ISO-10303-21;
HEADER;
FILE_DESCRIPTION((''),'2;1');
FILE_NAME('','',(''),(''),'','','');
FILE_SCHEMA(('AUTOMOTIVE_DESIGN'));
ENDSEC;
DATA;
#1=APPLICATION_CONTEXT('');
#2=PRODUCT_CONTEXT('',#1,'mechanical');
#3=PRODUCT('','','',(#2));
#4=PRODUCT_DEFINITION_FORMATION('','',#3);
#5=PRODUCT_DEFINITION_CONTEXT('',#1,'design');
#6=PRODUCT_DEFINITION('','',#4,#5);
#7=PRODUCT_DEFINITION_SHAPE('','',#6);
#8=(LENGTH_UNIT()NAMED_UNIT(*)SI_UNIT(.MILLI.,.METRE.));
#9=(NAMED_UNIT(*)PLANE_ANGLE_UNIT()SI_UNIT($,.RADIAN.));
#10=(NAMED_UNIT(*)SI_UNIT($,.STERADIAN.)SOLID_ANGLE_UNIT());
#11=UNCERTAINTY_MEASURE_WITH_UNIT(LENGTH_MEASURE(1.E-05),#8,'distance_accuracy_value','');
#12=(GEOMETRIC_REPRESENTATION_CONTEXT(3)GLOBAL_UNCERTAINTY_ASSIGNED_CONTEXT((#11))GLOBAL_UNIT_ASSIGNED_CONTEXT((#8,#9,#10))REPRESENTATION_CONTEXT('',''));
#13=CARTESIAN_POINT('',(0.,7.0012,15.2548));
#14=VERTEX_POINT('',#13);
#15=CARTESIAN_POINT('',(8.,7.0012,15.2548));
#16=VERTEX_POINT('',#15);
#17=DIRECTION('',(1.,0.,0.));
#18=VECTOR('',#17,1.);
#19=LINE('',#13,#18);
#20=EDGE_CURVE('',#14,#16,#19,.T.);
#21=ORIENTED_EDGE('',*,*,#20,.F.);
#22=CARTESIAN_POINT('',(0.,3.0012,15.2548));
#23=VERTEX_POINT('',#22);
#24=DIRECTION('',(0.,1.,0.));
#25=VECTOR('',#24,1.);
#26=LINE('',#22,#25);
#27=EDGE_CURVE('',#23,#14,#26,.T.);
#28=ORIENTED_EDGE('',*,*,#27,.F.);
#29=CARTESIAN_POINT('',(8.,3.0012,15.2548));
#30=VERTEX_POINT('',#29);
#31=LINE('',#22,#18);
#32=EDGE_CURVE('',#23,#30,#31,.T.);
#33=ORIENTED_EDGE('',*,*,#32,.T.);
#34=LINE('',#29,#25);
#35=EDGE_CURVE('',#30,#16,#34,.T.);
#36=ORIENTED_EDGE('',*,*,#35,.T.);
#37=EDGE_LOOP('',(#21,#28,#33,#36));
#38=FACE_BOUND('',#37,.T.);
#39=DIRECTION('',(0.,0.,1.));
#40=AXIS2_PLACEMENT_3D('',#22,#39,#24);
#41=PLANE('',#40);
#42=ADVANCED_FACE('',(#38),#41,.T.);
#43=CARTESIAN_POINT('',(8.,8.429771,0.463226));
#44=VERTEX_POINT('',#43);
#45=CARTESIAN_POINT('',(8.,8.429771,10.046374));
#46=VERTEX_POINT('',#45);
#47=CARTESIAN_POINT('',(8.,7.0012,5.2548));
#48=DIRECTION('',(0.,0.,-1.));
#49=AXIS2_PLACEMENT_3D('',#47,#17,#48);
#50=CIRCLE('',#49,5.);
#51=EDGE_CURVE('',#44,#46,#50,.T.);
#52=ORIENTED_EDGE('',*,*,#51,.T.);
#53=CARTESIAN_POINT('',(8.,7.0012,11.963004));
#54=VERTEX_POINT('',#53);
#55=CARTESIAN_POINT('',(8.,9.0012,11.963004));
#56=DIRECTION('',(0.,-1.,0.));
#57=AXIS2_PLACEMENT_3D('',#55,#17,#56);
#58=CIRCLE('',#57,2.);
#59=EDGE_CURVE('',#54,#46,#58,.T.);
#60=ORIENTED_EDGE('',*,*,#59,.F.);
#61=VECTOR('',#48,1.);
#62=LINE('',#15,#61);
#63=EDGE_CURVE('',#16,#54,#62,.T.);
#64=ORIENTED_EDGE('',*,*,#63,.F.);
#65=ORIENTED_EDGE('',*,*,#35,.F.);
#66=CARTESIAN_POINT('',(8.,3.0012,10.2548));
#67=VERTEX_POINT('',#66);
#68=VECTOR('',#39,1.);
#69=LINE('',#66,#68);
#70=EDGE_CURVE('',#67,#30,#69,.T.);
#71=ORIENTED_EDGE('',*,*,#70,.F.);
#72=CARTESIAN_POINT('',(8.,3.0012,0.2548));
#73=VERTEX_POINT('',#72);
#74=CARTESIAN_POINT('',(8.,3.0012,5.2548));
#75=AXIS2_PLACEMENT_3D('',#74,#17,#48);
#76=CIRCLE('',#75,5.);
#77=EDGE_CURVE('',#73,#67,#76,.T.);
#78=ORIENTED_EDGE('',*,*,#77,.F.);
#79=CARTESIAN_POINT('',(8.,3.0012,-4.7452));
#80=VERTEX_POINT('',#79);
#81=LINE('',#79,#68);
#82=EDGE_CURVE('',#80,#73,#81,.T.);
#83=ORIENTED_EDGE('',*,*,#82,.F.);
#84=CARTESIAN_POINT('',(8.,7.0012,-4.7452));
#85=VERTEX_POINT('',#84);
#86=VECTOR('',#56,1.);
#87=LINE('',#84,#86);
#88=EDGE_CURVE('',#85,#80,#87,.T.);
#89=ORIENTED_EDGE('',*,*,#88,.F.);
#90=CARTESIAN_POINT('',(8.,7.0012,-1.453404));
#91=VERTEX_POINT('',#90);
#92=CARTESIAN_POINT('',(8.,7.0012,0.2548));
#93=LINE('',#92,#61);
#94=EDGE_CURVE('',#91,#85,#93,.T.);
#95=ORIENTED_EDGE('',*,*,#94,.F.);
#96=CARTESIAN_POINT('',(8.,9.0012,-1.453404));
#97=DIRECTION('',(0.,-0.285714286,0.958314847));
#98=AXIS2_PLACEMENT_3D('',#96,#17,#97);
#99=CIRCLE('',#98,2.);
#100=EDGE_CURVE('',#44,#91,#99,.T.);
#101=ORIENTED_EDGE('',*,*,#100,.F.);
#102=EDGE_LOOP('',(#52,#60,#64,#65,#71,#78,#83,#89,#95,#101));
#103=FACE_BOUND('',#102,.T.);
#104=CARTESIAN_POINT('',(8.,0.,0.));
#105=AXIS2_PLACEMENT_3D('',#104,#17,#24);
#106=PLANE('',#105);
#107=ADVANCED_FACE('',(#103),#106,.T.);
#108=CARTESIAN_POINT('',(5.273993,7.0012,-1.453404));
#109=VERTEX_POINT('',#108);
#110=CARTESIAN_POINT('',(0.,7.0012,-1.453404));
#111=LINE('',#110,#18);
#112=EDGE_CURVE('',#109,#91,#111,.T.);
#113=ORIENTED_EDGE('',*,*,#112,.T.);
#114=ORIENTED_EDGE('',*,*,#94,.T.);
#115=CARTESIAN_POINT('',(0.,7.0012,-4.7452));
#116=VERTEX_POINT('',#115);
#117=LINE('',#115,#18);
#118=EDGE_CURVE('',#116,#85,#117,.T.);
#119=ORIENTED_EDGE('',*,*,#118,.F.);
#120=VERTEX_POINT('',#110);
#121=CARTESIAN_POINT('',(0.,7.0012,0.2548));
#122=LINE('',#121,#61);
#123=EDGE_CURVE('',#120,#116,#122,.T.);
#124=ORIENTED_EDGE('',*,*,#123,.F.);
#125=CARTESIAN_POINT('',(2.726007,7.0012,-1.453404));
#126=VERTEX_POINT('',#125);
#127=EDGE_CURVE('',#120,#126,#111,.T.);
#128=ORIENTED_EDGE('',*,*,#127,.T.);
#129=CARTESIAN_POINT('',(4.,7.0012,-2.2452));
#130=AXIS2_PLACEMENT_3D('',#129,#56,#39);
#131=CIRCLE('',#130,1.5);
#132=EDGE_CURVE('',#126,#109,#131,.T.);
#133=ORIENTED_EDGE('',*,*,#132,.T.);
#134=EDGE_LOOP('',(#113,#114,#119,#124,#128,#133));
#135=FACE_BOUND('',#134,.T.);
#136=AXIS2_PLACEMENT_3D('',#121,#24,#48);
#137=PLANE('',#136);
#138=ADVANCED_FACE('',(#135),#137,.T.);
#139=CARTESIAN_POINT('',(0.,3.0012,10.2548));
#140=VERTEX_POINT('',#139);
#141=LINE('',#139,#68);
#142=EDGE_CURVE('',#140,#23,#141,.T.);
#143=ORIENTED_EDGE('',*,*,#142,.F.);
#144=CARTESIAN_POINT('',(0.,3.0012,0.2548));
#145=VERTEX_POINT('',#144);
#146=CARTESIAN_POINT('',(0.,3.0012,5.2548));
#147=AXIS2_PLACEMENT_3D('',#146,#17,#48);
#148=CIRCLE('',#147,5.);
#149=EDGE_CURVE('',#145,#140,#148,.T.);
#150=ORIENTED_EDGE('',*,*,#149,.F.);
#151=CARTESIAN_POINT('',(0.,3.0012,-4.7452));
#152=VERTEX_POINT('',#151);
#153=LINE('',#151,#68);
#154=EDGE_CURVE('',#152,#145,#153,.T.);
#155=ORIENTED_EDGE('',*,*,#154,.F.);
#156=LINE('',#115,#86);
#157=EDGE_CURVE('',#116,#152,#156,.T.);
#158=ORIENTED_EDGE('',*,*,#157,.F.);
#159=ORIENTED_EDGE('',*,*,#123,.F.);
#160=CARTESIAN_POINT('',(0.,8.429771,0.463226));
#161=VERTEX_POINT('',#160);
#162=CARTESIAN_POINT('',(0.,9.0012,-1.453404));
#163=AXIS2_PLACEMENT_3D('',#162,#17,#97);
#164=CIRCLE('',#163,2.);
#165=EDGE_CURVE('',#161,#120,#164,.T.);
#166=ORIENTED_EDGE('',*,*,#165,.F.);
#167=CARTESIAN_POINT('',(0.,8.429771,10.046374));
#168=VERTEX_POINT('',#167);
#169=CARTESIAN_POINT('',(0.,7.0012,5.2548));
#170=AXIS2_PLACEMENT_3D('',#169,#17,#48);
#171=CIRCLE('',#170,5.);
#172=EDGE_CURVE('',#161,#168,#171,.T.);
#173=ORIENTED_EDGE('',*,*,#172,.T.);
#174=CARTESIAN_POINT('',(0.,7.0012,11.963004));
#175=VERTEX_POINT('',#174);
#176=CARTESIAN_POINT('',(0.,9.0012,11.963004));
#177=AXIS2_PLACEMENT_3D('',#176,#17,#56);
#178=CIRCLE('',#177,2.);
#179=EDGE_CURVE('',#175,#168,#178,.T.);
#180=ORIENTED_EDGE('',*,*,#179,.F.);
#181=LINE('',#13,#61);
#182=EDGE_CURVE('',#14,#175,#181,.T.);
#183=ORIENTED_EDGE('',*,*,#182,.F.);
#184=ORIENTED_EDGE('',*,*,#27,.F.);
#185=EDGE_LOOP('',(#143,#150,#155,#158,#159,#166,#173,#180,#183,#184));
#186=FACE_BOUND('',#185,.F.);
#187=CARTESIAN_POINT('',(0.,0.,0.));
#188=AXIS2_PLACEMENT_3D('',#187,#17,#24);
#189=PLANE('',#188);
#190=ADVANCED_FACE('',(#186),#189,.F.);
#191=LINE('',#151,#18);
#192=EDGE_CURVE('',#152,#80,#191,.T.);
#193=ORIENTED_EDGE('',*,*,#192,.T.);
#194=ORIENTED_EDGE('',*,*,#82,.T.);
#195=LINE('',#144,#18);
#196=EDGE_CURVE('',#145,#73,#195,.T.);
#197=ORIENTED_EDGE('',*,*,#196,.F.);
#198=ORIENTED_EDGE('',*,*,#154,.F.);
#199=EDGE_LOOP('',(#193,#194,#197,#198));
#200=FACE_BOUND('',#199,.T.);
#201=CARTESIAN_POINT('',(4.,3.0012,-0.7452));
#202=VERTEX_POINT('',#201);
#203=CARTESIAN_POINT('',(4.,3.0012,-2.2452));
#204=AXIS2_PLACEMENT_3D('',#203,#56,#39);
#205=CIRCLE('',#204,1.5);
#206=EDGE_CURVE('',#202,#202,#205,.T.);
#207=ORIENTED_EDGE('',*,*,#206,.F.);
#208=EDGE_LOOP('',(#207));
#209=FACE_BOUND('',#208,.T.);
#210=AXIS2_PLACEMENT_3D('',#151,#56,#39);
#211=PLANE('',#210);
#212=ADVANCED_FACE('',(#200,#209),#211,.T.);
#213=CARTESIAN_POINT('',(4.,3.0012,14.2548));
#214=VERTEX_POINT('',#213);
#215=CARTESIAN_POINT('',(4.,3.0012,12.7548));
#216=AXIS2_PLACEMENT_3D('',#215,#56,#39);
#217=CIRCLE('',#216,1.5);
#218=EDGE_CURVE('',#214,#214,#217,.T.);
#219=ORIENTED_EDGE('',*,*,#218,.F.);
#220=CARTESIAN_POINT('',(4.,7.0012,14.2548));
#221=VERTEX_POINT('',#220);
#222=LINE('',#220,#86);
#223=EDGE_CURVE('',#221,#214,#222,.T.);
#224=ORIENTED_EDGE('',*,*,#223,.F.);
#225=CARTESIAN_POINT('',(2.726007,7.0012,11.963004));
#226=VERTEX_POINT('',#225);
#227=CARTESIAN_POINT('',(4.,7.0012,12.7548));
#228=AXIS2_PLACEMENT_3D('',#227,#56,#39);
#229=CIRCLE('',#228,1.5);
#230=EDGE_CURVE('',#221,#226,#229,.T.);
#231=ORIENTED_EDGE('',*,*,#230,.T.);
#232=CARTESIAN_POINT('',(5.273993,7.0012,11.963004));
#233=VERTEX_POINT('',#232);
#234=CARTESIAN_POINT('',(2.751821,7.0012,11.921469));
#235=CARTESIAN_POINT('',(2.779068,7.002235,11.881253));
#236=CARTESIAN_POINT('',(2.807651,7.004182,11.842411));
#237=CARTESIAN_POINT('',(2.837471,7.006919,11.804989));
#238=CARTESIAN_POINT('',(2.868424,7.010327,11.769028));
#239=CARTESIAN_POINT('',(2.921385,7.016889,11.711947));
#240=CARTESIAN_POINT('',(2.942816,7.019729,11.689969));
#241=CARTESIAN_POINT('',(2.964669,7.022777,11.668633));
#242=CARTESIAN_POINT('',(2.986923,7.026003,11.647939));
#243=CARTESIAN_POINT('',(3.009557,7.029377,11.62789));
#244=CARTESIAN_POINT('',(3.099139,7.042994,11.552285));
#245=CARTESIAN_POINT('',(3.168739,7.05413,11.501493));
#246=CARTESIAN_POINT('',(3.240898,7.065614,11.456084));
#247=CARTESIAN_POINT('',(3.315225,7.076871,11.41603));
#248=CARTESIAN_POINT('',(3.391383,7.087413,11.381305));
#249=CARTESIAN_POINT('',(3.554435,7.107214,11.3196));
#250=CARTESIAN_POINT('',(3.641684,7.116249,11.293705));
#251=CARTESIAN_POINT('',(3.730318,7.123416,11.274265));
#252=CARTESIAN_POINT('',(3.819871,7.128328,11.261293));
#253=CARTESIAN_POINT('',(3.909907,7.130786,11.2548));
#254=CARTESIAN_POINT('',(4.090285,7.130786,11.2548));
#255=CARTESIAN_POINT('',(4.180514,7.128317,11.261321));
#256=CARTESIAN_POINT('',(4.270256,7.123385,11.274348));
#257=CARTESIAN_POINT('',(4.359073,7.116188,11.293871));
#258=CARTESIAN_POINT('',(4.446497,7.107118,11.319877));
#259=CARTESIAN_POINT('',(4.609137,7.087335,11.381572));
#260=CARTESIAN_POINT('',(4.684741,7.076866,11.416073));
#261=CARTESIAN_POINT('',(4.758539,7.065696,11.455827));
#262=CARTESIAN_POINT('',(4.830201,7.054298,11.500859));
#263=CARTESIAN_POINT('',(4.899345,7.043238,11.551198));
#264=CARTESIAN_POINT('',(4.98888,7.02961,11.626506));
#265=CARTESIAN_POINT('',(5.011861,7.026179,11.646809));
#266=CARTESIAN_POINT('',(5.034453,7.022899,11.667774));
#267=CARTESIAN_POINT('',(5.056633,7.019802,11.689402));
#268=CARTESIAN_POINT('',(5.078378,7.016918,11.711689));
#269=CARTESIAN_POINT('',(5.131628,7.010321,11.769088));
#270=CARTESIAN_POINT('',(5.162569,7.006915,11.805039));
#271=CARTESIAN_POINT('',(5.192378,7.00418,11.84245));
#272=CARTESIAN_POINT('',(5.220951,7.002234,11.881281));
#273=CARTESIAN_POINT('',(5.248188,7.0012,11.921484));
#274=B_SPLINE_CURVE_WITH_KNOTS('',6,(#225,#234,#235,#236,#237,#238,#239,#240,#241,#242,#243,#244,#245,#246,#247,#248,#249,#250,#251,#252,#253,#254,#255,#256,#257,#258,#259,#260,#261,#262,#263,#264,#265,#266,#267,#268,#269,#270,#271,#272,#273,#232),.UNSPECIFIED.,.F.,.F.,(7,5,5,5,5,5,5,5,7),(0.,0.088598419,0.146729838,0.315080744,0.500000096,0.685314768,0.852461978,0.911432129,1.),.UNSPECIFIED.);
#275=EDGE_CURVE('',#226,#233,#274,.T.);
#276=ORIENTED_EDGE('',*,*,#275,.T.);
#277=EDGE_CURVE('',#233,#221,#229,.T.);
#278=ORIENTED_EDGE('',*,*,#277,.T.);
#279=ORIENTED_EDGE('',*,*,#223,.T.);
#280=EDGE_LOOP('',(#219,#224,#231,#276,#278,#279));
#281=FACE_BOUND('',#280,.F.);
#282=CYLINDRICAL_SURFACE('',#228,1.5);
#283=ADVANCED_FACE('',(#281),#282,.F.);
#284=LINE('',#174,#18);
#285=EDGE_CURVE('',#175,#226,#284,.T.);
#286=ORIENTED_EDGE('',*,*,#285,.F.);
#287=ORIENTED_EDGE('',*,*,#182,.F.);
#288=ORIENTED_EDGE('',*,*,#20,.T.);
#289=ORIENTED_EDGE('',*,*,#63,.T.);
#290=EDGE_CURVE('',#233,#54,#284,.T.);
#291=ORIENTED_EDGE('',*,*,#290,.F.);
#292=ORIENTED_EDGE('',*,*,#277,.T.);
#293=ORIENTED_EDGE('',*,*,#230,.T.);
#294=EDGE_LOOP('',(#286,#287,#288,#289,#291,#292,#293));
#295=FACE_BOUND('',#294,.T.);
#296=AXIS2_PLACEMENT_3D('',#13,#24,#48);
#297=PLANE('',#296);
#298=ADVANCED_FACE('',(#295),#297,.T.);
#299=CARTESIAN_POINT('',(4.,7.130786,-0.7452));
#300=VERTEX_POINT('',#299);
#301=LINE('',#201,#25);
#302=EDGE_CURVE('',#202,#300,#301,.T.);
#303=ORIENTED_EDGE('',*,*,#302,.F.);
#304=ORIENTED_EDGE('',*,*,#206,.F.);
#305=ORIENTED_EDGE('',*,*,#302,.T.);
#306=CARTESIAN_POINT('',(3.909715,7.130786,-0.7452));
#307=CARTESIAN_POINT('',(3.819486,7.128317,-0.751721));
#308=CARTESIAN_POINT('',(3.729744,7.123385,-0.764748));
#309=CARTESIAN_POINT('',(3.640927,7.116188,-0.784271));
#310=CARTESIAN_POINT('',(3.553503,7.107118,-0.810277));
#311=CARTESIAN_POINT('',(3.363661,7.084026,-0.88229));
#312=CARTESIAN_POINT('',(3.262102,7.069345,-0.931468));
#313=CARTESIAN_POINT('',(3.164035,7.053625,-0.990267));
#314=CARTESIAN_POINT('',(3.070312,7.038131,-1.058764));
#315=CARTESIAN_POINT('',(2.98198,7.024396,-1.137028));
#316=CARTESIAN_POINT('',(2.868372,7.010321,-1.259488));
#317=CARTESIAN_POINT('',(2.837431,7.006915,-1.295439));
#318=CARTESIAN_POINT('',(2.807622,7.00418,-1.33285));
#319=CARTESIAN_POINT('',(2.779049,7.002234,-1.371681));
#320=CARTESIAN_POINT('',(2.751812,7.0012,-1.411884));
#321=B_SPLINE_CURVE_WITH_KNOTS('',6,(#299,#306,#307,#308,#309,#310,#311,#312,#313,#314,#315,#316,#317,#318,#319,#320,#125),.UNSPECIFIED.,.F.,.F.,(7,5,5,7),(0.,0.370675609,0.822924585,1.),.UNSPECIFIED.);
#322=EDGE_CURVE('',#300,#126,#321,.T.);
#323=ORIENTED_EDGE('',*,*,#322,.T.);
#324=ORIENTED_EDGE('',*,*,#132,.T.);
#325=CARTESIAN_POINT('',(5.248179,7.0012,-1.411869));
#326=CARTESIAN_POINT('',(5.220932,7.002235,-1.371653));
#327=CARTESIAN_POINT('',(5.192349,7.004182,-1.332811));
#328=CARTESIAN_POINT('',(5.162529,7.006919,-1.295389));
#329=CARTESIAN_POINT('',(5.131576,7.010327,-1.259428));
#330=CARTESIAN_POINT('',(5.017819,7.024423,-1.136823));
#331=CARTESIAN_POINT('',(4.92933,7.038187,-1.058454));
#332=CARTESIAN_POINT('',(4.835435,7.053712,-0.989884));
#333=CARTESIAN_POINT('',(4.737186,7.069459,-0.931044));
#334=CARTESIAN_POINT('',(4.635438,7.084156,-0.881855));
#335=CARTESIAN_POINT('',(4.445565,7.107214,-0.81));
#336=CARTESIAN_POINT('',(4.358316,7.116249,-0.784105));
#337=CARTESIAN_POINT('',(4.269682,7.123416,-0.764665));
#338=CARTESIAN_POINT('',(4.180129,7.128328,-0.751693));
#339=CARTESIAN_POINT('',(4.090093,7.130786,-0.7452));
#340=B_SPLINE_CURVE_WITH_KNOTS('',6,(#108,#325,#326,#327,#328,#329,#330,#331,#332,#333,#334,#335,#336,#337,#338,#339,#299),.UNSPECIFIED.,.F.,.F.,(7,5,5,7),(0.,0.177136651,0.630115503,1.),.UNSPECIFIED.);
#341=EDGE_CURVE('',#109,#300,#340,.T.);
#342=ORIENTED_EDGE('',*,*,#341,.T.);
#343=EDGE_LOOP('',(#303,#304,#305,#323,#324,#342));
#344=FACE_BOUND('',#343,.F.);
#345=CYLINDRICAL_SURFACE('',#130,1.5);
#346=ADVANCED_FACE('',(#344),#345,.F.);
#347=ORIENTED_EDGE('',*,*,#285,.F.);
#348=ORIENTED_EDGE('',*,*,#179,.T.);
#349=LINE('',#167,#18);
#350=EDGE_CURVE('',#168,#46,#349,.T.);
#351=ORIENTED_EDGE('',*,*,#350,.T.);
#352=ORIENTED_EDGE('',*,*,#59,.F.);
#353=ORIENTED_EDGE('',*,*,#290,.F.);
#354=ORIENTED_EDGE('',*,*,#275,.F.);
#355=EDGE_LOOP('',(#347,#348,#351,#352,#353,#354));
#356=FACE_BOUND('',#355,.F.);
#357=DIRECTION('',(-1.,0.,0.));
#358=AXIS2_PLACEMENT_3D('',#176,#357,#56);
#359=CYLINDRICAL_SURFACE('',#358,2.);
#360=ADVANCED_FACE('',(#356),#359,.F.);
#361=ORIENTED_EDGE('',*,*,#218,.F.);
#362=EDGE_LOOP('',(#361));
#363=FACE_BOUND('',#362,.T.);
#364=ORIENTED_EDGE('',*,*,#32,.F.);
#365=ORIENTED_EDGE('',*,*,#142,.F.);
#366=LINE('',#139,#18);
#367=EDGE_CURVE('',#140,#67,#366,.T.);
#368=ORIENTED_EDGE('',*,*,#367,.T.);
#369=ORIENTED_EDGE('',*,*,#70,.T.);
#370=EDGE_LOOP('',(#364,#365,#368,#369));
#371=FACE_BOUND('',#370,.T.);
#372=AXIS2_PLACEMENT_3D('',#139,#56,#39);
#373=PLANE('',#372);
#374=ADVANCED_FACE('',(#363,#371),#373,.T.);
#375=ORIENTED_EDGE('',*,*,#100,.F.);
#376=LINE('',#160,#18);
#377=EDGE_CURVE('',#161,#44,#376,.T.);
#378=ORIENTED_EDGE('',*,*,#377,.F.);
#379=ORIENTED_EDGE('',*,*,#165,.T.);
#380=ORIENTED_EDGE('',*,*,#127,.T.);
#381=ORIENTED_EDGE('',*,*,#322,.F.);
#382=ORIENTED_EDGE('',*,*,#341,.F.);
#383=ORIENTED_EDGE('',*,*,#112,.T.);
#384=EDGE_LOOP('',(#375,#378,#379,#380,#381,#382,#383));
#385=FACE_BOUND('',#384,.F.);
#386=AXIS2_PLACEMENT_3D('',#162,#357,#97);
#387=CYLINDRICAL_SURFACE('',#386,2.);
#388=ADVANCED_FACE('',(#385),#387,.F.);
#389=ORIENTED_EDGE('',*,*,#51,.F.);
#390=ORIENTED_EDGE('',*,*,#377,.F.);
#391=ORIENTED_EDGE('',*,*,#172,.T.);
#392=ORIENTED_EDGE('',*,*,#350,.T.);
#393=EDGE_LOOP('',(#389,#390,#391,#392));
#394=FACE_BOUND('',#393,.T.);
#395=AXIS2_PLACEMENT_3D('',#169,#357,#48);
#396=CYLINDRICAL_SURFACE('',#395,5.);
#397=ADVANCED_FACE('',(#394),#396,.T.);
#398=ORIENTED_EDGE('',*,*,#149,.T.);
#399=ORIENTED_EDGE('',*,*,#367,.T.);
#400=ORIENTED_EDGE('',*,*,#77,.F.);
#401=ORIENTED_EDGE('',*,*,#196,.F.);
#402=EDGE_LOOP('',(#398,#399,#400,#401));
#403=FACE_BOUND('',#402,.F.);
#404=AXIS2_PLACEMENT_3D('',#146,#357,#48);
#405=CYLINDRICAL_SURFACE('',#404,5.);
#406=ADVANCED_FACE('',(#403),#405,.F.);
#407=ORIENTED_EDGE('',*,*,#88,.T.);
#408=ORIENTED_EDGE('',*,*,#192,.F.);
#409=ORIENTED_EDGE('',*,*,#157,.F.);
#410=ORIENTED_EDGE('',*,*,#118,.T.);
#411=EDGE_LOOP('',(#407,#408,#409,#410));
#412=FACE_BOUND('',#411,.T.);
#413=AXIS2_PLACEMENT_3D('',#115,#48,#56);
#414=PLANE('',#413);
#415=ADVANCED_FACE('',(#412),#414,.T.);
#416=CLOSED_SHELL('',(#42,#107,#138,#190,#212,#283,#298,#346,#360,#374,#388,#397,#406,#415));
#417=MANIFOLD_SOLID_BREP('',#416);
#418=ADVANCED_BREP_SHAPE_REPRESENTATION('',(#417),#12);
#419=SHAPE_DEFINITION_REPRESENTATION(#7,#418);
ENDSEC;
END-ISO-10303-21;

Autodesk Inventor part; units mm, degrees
ref_plane "YZ Plane" through (0, 0, 0) normal (1, 0, 0) x (0, 1, 0)
ref_plane "XZ Plane" through (0, 0, 0) normal (0, 1, 0) x (-1, 0, 0)
ref_plane "XY Plane" through (0, 0, 0) normal (0, 0, 1) x (1, 0, 0)
sketch "Skizze1" plane through (0, 0, 0) normal (1, 0, 0) x (0, 1, 0)
  line L0 (3.0012, 15.2548) -> (7.0012, 15.2548)
  line L1 (7.0012, -4.7452) -> (3.0012, -4.7452)
  arc A0 (3.0012, 0.2548) -> (3.0012, 10.2548) centre (3.0012, 5.2548) ccw
  arc A1 (7.0012, 0.2548) -> (7.0012, 10.2548) centre (7.0012, 5.2548) ccw
  line L2 (3.0012, -4.7452) -> (3.0012, 0.2548)
  line L3 (3.0012, 10.2548) -> (3.0012, 15.2548)
  line L4 (7.0012, 15.2548) -> (7.0012, 10.2548)
  line L5 (7.0012, 0.2548) -> (7.0012, -4.7452)
  point P0 (0, 0)
  dimension "d0" = 4
  dimension "d1" = 20
  dimension "d3" = 10
extrude "Extrusion1" add sketch "Skizze1" along normal blind 8
sketch "Skizze2" plane through (0, 7.0012, 15.2548) normal (0, 1, 0) x (1, 0, 0)
  line L0 (0, 0) -> (8, 0) projected
  line L1 (0, 20) -> (8, 20) projected
  line L2 (8, 20) -> (8, 15) projected
  line L3 (8, 5) -> (8, 0) projected
  point P0 (0, 15.2548)
  point P1 (4, 2.5)
  point P2 (4, 17.5)
  point P3 (4, 2.5)
  dimension "d6" = 2.5
  dimension "d7" = 2.5
  dimension "d8" = 4
  dimension "d9" = 4
hole "Bohrung1" at (4, 7.0012, 12.7548) at (4, 7.0012, -2.2452) direction (0, -1, 0) diameter 3 depth 8 tip angle 118
fillet "Rundung1" radius 2 2 edges at (4, 7.0012, 10.2548) (4, 7.0012, 0.2548)
properties part number "Klemme"
